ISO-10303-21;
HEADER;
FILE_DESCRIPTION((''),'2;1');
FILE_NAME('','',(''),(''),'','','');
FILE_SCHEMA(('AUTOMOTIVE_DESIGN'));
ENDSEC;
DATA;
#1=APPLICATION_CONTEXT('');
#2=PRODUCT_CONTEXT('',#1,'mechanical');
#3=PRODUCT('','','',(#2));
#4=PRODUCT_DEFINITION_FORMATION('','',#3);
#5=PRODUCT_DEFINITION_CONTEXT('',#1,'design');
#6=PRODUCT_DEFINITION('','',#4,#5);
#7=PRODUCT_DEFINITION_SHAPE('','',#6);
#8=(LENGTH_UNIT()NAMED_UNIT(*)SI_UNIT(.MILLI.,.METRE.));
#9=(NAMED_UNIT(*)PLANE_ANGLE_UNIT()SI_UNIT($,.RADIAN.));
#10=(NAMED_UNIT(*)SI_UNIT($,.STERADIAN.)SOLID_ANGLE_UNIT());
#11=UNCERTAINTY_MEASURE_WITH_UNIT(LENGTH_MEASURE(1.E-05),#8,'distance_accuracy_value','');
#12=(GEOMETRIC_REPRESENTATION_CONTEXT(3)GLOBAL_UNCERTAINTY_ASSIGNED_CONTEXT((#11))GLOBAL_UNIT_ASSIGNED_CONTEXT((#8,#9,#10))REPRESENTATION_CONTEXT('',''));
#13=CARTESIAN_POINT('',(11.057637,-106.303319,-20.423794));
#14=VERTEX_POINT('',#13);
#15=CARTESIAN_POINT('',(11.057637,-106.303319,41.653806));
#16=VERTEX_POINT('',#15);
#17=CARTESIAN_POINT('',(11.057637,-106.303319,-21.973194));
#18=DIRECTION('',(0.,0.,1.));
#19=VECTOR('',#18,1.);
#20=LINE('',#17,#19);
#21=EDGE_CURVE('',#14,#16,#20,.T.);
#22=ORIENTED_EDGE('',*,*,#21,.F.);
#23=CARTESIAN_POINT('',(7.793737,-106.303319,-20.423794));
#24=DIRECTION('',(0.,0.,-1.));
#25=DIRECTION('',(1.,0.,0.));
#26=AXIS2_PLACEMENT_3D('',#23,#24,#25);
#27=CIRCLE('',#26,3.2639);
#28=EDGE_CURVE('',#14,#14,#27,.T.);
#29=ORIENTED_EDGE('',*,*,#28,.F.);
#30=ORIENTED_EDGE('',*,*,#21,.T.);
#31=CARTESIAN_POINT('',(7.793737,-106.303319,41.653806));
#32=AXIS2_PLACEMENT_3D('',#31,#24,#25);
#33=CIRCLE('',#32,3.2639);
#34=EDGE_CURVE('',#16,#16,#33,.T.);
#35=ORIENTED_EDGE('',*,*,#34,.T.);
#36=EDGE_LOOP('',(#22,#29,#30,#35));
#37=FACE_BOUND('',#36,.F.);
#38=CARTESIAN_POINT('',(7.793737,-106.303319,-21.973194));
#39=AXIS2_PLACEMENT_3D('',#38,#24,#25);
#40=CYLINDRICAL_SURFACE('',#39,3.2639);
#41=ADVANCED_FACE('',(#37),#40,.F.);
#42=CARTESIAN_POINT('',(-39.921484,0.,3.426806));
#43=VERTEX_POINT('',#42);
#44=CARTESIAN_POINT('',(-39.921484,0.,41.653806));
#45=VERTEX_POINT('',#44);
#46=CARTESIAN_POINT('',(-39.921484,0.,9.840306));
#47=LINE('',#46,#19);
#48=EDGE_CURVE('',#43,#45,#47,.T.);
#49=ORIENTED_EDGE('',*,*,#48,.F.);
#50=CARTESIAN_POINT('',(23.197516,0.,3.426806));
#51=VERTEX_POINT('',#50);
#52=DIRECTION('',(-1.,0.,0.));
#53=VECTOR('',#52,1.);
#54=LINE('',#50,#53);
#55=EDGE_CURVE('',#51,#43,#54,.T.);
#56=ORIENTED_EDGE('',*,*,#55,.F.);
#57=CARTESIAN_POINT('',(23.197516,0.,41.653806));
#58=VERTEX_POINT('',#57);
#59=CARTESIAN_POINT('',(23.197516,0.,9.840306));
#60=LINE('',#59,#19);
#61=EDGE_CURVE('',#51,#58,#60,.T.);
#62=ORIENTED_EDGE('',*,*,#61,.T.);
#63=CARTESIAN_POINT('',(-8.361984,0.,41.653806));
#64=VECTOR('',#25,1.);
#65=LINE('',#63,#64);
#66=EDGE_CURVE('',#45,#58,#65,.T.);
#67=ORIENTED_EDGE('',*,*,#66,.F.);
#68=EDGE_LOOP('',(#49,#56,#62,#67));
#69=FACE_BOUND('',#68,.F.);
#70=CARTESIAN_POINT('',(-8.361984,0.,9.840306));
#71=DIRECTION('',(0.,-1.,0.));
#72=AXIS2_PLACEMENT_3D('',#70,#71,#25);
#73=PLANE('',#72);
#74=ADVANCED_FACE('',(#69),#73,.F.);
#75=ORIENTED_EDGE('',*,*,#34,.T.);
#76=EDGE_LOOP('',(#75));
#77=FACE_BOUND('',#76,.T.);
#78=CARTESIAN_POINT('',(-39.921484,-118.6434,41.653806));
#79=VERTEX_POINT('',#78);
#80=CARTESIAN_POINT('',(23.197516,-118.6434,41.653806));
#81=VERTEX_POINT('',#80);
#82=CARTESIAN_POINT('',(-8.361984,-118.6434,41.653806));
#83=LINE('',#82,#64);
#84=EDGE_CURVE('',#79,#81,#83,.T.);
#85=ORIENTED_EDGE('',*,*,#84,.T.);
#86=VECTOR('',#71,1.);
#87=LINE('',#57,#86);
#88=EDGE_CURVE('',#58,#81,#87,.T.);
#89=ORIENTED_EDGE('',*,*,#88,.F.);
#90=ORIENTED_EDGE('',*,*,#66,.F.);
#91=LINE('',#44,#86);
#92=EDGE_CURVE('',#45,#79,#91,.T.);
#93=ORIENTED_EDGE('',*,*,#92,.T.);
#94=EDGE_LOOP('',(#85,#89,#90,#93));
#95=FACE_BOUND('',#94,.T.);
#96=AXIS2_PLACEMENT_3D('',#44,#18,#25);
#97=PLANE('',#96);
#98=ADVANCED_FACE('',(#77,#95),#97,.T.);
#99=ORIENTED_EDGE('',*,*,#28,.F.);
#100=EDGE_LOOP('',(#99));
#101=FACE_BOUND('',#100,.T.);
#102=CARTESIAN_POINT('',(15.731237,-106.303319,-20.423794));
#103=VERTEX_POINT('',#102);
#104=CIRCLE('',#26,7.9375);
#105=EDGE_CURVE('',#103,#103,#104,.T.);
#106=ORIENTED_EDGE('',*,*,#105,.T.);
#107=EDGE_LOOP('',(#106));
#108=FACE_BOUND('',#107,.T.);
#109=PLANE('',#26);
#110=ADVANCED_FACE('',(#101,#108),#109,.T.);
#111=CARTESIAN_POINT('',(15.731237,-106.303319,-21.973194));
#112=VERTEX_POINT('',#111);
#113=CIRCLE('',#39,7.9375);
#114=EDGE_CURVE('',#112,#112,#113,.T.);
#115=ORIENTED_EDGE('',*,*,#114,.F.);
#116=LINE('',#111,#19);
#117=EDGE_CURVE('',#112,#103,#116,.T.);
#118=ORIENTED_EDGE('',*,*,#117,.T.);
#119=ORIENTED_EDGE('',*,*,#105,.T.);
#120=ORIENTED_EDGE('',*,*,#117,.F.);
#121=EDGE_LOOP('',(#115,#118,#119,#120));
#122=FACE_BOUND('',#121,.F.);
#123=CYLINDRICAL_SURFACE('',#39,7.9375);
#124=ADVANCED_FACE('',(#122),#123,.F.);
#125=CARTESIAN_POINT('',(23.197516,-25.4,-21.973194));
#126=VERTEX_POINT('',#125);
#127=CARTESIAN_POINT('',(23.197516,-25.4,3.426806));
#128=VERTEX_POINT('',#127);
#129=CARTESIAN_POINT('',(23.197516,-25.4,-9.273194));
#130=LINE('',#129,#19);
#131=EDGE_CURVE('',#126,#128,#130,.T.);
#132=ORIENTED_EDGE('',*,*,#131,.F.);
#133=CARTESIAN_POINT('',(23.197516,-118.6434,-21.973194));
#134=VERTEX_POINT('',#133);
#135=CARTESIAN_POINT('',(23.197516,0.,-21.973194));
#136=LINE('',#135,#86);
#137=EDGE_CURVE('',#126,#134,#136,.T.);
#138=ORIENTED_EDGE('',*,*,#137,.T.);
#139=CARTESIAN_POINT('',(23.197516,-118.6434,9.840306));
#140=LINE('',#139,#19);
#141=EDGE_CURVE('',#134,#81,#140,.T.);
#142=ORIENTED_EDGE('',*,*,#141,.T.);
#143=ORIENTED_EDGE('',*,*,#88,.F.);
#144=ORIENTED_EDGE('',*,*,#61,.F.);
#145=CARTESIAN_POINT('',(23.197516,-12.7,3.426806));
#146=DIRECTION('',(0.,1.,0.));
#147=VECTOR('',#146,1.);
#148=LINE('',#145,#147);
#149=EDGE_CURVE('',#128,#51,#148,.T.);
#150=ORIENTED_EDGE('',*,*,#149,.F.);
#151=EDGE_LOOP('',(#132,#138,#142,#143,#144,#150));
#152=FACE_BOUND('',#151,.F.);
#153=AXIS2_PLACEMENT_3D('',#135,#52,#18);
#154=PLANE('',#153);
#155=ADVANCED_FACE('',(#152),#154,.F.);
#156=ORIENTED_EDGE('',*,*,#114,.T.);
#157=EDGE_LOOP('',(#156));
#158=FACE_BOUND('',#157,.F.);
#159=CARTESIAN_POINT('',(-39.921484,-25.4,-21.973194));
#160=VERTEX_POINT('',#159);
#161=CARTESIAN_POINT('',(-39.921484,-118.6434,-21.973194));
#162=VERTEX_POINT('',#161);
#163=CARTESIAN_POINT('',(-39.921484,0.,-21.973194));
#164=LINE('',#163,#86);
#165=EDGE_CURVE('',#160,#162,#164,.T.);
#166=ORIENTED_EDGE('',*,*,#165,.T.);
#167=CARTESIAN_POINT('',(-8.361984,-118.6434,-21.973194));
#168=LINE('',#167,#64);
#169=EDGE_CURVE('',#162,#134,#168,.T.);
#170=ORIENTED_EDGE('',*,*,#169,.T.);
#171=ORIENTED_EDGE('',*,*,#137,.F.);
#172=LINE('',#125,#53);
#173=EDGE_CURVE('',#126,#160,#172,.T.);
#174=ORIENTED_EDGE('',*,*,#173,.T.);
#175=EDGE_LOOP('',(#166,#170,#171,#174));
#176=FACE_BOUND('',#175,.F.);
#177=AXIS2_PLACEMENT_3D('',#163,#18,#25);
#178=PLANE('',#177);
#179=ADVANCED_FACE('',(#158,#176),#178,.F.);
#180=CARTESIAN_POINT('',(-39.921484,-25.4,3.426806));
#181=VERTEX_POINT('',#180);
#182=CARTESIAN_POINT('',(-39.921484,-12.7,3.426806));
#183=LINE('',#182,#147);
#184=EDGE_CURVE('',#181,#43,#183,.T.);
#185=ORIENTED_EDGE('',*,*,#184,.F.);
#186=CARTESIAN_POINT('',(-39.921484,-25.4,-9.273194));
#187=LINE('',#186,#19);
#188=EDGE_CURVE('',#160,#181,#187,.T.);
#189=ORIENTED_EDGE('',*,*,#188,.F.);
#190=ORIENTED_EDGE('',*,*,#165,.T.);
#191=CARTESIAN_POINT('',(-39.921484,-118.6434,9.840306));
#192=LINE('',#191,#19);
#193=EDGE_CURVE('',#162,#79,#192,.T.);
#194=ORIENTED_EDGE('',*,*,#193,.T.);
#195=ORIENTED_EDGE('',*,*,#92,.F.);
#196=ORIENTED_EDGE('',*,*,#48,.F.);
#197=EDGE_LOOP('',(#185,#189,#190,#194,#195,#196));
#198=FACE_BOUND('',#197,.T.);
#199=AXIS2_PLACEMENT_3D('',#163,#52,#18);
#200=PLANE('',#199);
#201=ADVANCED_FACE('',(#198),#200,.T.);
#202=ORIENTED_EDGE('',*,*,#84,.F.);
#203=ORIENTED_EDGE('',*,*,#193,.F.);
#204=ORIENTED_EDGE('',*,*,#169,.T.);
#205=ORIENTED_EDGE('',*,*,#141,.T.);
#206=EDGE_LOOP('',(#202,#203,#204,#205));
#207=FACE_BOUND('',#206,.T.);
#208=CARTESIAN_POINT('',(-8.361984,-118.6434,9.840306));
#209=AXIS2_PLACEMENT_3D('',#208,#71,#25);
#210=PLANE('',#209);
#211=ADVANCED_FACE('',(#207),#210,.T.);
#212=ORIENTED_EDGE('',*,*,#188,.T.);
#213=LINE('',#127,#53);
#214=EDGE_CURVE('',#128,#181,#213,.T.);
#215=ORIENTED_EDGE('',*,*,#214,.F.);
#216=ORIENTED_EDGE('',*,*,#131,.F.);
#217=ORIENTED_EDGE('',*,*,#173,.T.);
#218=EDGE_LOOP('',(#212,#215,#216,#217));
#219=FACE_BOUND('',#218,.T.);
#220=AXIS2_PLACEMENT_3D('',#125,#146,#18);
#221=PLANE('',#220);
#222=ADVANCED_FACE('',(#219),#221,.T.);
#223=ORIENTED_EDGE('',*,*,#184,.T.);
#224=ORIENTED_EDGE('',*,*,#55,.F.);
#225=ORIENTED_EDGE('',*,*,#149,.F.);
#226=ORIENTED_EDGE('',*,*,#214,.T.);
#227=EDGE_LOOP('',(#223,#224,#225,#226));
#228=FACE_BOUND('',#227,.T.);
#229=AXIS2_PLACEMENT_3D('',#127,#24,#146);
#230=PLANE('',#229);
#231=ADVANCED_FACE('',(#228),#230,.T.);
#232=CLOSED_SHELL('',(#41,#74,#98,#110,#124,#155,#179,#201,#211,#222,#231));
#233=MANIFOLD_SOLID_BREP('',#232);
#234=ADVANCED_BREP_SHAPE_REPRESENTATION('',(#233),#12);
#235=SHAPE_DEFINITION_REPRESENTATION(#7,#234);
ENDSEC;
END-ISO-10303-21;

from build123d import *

# Parameters (mm, degrees)
F0_W     = 63.119
F0_H     = 63.627
F1_DEPTH = 118.6434
F2_W     = 25.4
F2_H     = 25.4
F3_DEPTH = 63.119
F4_R     = 3.2639
F5_DEPTH = 63.627
F6_R     = 7.9375
F7_DEPTH = 1.5494


# Not quite as in the source:
# - a feature names something its author has since deleted; it is built from what else it names


with BuildPart() as f1:
    # F0 (on Front) → F1 (new body)
    with BuildSketch(Plane.XZ):
        with Locations((-8.3619841438, 9.8403063603)):
            Rectangle(F0_W, F0_H)
    extrude(amount=F1_DEPTH)

    # F2 (on face) → F3 (cut, through all)
    with BuildSketch(Plane.YZ.offset(23.1975158562)):
        with Locations((-12.7, -9.2731936397)):
            Rectangle(F2_W, F2_H)
    extrude(amount=-F3_DEPTH, mode=Mode.SUBTRACT)

    # F4 (on face) → F5 (cut, through all)
    with BuildSketch(Plane(origin=(0, 0, -21.9731936397), x_dir=(1, 0, 0), z_dir=(0, 0, -1))):
        with Locations((7.7937371098, 106.303319335)):
            Circle(F4_R)
    extrude(amount=-F5_DEPTH, mode=Mode.SUBTRACT)

    # F6 (on face) → F7 (cut)
    with BuildSketch(Plane(origin=(0, 0, -21.9731936397), x_dir=(1, 0, 0), z_dir=(0, 0, -1))):
        with Locations((7.7937371098, 106.303319335)):
            Circle(F6_R)
    extrude(amount=-F7_DEPTH, mode=Mode.SUBTRACT)


solid = f1.part
